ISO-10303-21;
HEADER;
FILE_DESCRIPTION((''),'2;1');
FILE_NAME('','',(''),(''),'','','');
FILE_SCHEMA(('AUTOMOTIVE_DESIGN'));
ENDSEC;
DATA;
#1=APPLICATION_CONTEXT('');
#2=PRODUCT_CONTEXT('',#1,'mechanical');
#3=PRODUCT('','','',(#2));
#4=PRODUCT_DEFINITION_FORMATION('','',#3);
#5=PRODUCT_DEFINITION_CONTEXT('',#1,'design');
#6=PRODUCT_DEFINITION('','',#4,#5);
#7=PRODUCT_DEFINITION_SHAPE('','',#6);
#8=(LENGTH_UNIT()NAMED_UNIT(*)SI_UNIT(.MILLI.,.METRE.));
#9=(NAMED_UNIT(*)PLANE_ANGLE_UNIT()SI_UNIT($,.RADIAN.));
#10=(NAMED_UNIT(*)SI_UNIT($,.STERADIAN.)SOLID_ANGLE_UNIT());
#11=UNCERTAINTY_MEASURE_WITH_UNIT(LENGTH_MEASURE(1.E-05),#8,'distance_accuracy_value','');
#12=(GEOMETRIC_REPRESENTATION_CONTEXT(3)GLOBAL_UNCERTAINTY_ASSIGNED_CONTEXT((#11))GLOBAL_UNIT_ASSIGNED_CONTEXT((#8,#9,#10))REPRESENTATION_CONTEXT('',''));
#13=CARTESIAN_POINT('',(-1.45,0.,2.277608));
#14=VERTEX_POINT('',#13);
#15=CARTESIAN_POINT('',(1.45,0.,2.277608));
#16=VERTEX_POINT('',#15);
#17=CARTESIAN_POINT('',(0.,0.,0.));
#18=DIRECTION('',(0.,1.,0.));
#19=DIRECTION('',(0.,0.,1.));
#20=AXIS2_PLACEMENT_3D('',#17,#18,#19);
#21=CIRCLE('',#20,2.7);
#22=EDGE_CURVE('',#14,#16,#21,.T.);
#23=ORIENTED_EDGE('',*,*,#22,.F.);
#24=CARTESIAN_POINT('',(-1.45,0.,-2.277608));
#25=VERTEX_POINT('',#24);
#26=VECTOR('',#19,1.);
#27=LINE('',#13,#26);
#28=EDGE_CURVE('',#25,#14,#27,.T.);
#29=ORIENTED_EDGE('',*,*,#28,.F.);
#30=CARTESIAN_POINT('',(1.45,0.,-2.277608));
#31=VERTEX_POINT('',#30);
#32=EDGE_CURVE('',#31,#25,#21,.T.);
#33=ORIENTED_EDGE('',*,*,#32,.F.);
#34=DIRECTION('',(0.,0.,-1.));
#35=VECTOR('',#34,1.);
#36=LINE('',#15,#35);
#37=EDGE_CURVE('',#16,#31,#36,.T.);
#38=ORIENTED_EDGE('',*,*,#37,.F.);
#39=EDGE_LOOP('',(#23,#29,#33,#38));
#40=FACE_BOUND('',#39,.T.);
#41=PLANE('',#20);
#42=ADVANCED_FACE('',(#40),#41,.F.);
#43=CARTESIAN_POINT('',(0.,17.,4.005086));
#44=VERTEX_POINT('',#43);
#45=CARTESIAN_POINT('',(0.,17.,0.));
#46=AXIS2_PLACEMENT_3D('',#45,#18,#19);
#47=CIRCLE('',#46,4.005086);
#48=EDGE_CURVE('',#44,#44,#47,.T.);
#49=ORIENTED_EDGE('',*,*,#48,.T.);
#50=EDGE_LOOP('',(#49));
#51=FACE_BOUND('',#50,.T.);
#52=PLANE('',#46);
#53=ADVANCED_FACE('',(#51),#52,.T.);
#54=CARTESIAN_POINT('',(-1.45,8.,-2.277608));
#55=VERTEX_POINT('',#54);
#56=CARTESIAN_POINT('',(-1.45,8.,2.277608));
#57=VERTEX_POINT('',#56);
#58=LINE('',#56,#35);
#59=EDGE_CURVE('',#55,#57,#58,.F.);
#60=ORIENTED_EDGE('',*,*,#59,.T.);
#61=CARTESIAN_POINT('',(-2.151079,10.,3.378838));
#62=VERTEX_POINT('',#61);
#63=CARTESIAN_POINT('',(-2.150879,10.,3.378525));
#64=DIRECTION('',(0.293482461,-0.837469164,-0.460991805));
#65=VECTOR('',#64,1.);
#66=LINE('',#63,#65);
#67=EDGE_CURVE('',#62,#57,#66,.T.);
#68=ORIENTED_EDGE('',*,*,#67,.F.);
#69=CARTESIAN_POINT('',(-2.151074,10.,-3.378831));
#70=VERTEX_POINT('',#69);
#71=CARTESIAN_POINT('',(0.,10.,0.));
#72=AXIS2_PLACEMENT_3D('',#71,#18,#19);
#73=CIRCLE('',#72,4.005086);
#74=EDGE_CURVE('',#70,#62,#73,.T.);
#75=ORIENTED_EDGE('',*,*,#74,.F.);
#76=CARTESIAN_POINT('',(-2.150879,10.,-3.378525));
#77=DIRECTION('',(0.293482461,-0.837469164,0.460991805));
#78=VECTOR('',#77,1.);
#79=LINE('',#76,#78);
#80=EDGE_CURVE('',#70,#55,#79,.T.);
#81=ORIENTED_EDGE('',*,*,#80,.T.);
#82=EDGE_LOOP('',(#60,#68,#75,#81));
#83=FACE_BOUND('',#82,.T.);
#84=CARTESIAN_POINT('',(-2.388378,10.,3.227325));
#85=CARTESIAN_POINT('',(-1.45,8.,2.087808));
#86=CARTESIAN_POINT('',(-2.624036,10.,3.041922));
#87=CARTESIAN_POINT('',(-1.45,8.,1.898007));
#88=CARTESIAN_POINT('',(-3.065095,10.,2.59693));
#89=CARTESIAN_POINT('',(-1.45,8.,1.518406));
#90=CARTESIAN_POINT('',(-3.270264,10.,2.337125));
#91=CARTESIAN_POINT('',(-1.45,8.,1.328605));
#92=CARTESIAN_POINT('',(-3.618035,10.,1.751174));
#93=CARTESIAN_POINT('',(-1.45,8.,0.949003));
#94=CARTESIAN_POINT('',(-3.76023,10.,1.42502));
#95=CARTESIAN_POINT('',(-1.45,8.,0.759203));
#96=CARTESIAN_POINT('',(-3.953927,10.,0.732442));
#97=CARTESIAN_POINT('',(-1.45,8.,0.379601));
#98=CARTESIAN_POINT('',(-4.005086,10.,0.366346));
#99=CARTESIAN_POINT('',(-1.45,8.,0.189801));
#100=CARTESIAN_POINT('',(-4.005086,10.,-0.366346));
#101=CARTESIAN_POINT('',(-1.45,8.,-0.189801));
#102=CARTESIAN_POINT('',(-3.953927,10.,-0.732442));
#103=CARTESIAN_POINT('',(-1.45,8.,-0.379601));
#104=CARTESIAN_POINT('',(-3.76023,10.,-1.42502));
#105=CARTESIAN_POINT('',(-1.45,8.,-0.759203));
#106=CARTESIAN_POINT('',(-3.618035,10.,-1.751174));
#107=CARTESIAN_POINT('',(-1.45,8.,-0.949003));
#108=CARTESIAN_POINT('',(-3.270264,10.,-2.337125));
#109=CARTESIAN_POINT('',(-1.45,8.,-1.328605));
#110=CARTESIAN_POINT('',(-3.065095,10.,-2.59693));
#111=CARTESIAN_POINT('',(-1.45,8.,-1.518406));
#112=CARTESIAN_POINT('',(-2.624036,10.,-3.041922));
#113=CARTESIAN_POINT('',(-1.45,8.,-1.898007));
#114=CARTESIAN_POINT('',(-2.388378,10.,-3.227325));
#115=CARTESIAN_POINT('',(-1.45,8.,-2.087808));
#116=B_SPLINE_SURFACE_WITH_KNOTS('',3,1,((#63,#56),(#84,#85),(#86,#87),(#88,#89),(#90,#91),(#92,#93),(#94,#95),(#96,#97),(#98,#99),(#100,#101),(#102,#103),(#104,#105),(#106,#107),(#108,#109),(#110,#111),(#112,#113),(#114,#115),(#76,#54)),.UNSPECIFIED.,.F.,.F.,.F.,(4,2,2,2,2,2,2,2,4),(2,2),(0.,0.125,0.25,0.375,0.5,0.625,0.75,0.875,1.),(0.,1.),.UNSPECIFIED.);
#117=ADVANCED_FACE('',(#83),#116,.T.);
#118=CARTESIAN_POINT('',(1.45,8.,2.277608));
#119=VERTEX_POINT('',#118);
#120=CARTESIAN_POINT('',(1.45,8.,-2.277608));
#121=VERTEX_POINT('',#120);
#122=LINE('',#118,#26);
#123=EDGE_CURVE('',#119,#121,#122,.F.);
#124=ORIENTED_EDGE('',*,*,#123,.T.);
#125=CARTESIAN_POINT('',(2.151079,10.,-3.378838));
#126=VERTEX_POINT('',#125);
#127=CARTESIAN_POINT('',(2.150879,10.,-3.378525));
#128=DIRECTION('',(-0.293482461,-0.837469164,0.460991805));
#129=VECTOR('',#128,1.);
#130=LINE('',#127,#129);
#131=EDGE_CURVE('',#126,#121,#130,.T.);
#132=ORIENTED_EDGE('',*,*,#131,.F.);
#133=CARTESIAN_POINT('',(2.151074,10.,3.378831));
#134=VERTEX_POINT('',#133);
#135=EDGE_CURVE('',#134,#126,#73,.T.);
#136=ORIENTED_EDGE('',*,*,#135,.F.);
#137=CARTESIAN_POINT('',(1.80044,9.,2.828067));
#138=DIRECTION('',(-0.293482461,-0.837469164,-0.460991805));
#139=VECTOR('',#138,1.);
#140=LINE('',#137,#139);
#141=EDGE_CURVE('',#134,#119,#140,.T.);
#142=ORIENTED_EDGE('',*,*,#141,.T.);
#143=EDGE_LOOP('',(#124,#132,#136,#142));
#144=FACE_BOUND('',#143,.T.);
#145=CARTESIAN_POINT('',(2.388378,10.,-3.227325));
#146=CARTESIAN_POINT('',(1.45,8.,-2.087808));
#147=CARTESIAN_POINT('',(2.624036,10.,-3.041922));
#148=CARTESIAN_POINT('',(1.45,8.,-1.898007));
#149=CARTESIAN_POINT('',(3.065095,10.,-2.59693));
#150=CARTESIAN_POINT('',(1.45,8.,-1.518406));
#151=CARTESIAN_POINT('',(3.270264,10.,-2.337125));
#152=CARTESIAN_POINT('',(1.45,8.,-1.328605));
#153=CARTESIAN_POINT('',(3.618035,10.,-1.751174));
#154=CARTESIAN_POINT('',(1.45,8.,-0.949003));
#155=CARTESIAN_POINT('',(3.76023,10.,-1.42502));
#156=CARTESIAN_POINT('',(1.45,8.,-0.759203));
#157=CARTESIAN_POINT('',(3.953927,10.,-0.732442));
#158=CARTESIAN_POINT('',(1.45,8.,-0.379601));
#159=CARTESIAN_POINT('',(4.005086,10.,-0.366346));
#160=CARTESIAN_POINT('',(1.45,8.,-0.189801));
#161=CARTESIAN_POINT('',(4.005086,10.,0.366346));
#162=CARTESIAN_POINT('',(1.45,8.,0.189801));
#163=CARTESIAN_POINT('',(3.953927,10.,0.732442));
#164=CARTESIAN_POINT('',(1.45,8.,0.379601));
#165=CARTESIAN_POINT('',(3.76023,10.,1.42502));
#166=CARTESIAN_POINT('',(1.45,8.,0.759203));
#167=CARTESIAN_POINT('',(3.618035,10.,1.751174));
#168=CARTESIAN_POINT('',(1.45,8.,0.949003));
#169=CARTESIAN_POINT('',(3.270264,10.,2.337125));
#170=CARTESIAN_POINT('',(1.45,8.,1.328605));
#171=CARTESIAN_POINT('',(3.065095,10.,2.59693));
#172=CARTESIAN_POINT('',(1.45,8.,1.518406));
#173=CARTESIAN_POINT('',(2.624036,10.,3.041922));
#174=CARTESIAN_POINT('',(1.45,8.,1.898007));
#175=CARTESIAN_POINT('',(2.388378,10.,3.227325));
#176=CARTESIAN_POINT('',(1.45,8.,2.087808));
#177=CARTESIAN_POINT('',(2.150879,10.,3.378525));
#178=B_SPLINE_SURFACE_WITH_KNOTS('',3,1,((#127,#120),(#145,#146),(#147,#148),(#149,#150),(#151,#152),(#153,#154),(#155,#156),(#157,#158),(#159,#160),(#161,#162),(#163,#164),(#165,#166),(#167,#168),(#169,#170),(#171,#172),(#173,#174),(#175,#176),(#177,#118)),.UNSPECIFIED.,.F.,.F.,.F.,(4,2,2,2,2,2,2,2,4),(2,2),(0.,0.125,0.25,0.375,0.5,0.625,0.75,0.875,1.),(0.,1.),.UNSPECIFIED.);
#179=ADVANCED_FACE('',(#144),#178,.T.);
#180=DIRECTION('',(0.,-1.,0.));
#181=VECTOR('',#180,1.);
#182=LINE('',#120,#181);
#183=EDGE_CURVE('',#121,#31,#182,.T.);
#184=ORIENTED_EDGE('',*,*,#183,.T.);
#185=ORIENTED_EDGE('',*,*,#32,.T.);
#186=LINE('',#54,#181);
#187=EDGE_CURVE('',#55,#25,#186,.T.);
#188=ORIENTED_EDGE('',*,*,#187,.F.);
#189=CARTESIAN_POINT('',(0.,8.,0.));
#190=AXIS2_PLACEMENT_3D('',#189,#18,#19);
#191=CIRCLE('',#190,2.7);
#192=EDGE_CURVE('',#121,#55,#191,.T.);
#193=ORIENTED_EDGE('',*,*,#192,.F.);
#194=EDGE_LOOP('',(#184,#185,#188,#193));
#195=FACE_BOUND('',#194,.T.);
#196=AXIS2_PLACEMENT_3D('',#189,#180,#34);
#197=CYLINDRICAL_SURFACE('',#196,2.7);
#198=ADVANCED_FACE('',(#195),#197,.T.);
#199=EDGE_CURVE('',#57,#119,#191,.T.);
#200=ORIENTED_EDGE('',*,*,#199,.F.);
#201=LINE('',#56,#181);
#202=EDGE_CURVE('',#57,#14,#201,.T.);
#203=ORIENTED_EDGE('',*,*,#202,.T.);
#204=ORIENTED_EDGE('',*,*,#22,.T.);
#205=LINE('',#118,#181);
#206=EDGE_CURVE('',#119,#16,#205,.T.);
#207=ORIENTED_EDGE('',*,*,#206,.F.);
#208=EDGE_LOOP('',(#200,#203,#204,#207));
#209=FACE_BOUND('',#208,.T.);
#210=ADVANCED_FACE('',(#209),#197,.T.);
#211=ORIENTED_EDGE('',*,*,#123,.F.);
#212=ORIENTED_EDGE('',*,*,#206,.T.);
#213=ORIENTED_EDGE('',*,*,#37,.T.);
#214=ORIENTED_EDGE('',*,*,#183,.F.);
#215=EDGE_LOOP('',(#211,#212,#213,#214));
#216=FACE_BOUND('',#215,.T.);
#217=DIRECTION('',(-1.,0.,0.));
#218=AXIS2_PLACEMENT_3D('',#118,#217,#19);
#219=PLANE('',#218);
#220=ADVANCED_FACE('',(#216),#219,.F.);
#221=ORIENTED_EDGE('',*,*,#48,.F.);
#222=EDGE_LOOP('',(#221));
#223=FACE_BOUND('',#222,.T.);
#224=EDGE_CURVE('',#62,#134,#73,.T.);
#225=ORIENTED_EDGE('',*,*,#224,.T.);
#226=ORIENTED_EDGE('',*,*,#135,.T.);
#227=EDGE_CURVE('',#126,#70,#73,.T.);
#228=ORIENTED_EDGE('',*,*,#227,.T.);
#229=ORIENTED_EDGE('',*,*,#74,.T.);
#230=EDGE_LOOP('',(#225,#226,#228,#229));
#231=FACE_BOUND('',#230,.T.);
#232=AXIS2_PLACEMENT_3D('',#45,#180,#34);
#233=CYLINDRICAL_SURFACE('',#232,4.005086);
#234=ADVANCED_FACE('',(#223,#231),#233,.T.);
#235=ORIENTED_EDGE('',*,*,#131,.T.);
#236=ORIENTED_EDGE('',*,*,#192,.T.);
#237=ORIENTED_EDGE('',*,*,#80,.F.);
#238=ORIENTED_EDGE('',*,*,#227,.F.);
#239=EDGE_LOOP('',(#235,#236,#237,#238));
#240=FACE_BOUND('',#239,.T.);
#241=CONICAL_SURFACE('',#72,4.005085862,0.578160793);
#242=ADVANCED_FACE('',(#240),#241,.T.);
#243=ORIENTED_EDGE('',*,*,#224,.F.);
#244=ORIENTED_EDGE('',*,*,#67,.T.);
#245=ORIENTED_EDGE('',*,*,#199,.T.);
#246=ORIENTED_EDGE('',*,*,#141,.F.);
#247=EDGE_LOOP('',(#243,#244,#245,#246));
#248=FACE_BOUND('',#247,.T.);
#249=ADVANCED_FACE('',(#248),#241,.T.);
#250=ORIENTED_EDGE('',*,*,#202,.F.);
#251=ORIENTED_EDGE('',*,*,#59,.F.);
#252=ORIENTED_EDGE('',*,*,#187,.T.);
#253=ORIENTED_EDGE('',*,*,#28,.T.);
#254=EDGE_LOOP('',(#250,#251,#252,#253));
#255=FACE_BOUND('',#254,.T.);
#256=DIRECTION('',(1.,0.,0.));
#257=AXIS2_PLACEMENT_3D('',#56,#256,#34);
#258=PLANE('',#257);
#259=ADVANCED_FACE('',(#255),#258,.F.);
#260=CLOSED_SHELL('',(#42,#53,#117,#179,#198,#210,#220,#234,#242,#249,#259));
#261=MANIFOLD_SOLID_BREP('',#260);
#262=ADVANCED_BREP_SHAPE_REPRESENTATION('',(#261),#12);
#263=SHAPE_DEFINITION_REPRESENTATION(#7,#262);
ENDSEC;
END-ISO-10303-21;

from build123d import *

# Parameters (mm, degrees)
BOSS_EXTRUDE1_DEPTH = 8
SKETCH4_2_R         = 4.005085862
BOSS_EXTRUDE2_DEPTH = 7


with BuildPart() as part:
    # Sketch2 → Boss-Extrude1 (new body)
    with BuildSketch(Plane(origin=(0, 0, 0), x_dir=(1, 0, 0), z_dir=(0, 1, 0))):
        with BuildLine():
            Line((-1.45, -2.277608395), (-1.45, 2.277608395))
            ThreePointArc((-1.45, 2.277608395), (0, 2.7), (1.45, 2.277608395))
            Line((1.45, 2.277608395), (1.45, -2.277608395))
            ThreePointArc((1.45, -2.277608395), (0, -2.7), (-1.45, -2.277608395))
        make_face()
    extrude(amount=BOSS_EXTRUDE1_DEPTH)

    # Loft1: read off the stored shape, not the designer's step
    # Loft1: loft between two sections, ruled curve by curve
    loft1_from = [
        Edge.make_bspline([(-2.150879444, 10, 3.378524882), (-2.388378106, 10, 3.227325466), (-2.624035514, 10, 3.04192179), (-3.065094821, 10, 2.596929783), (-3.270264421, 10, 2.337125185), (-3.618034511, 10, 1.751173832), (-3.760229719, 10, 1.425019575), (-3.95392679, 10, 0.73244199), (-4.005085862, 10, 0.366346071), (-4.005085862, 10, -0.366346071), (-3.95392679, 10, -0.73244199), (-3.760229719, 10, -1.425019575), (-3.618034511, 10, -1.751173832), (-3.270264421, 10, -2.337125185), (-3.065094821, 10, -2.596929783), (-2.624035514, 10, -3.04192179), (-2.388378106, 10, -3.227325466), (-2.150879444, 10, -3.378524882)], [0, 0, 0, 0, 0.125, 0.125, 0.25, 0.25, 0.375, 0.375, 0.5, 0.5, 0.625, 0.625, 0.75, 0.75, 0.875, 0.875, 1, 1, 1, 1], 3),
        Edge.make_bspline([(2.150879444, 10, -3.378524882), (2.388378106, 10, -3.227325466), (2.624035514, 10, -3.04192179), (3.065094821, 10, -2.596929783), (3.270264421, 10, -2.337125185), (3.618034511, 10, -1.751173832), (3.760229719, 10, -1.425019575), (3.95392679, 10, -0.73244199), (4.005085862, 10, -0.366346071), (4.005085862, 10, 0.366346071), (3.95392679, 10, 0.73244199), (3.760229719, 10, 1.425019575), (3.618034511, 10, 1.751173832), (3.270264421, 10, 2.337125185), (3.065094821, 10, 2.596929783), (2.624035514, 10, 3.04192179), (2.388378106, 10, 3.227325466), (2.150879444, 10, 3.378524882)], [0, 0, 0, 0, 0.125, 0.125, 0.25, 0.25, 0.375, 0.375, 0.5, 0.5, 0.625, 0.625, 0.75, 0.75, 0.875, 0.875, 1, 1, 1, 1], 3),
        Edge.make_three_point_arc((2.150879444, 10, -3.378524882), (0, 10, -4.005085862), (-2.150879444, 10, -3.378524882)),
        Edge.make_three_point_arc((-2.150879444, 10, 3.378524882), (0, 10, 4.005085862), (2.150879444, 10, 3.378524882)),
    ]
    loft1_to = [
        Edge.make_bspline([(-1.45, 8, 2.277608395), (-1.45, 8, 2.087807695), (-1.45, 8, 1.898006996), (-1.45, 8, 1.518405597), (-1.45, 8, 1.328604897), (-1.45, 8, 0.949003498), (-1.45, 8, 0.759202798), (-1.45, 8, 0.379601399), (-1.45, 8, 0.1898007), (-1.45, 8, -0.1898007), (-1.45, 8, -0.379601399), (-1.45, 8, -0.759202798), (-1.45, 8, -0.949003498), (-1.45, 8, -1.328604897), (-1.45, 8, -1.518405597), (-1.45, 8, -1.898006996), (-1.45, 8, -2.087807695), (-1.45, 8, -2.277608395)], [0, 0, 0, 0, 0.125, 0.125, 0.25, 0.25, 0.375, 0.375, 0.5, 0.5, 0.625, 0.625, 0.75, 0.75, 0.875, 0.875, 1, 1, 1, 1], 3),
        Edge.make_bspline([(1.45, 8, -2.277608395), (1.45, 8, -2.087807695), (1.45, 8, -1.898006996), (1.45, 8, -1.518405597), (1.45, 8, -1.328604897), (1.45, 8, -0.949003498), (1.45, 8, -0.759202798), (1.45, 8, -0.379601399), (1.45, 8, -0.1898007), (1.45, 8, 0.1898007), (1.45, 8, 0.379601399), (1.45, 8, 0.759202798), (1.45, 8, 0.949003498), (1.45, 8, 1.328604897), (1.45, 8, 1.518405597), (1.45, 8, 1.898006996), (1.45, 8, 2.087807695), (1.45, 8, 2.277608395)], [0, 0, 0, 0, 0.125, 0.125, 0.25, 0.25, 0.375, 0.375, 0.5, 0.5, 0.625, 0.625, 0.75, 0.75, 0.875, 0.875, 1, 1, 1, 1], 3),
        Edge.make_three_point_arc((1.45, 8, -2.277608395), (0, 8, -2.7), (-1.45, 8, -2.277608395)),
        Edge.make_three_point_arc((-1.45, 8, 2.277608395), (0, 8, 2.7), (1.45, 8, 2.277608395)),
    ]
    loft1 = Solid(Shell([*[Face.make_surface_from_curves(loft1_from[k], loft1_to[k]) for k in range(4)], Face(Wire(loft1_from)), Face(Wire(loft1_to))]))
    add(loft1)

    # Sketch4<2> → Boss-Extrude2 (add)
    with BuildSketch(Plane(origin=(0, 10, 0), x_dir=(1, 0, 0), z_dir=(0, 1, 0))):
        with Locations(Location((0, 0, 0), (0, 0, 122.482158535))):
            Circle(SKETCH4_2_R)
    extrude(amount=BOSS_EXTRUDE2_DEPTH)


solid = part.part
